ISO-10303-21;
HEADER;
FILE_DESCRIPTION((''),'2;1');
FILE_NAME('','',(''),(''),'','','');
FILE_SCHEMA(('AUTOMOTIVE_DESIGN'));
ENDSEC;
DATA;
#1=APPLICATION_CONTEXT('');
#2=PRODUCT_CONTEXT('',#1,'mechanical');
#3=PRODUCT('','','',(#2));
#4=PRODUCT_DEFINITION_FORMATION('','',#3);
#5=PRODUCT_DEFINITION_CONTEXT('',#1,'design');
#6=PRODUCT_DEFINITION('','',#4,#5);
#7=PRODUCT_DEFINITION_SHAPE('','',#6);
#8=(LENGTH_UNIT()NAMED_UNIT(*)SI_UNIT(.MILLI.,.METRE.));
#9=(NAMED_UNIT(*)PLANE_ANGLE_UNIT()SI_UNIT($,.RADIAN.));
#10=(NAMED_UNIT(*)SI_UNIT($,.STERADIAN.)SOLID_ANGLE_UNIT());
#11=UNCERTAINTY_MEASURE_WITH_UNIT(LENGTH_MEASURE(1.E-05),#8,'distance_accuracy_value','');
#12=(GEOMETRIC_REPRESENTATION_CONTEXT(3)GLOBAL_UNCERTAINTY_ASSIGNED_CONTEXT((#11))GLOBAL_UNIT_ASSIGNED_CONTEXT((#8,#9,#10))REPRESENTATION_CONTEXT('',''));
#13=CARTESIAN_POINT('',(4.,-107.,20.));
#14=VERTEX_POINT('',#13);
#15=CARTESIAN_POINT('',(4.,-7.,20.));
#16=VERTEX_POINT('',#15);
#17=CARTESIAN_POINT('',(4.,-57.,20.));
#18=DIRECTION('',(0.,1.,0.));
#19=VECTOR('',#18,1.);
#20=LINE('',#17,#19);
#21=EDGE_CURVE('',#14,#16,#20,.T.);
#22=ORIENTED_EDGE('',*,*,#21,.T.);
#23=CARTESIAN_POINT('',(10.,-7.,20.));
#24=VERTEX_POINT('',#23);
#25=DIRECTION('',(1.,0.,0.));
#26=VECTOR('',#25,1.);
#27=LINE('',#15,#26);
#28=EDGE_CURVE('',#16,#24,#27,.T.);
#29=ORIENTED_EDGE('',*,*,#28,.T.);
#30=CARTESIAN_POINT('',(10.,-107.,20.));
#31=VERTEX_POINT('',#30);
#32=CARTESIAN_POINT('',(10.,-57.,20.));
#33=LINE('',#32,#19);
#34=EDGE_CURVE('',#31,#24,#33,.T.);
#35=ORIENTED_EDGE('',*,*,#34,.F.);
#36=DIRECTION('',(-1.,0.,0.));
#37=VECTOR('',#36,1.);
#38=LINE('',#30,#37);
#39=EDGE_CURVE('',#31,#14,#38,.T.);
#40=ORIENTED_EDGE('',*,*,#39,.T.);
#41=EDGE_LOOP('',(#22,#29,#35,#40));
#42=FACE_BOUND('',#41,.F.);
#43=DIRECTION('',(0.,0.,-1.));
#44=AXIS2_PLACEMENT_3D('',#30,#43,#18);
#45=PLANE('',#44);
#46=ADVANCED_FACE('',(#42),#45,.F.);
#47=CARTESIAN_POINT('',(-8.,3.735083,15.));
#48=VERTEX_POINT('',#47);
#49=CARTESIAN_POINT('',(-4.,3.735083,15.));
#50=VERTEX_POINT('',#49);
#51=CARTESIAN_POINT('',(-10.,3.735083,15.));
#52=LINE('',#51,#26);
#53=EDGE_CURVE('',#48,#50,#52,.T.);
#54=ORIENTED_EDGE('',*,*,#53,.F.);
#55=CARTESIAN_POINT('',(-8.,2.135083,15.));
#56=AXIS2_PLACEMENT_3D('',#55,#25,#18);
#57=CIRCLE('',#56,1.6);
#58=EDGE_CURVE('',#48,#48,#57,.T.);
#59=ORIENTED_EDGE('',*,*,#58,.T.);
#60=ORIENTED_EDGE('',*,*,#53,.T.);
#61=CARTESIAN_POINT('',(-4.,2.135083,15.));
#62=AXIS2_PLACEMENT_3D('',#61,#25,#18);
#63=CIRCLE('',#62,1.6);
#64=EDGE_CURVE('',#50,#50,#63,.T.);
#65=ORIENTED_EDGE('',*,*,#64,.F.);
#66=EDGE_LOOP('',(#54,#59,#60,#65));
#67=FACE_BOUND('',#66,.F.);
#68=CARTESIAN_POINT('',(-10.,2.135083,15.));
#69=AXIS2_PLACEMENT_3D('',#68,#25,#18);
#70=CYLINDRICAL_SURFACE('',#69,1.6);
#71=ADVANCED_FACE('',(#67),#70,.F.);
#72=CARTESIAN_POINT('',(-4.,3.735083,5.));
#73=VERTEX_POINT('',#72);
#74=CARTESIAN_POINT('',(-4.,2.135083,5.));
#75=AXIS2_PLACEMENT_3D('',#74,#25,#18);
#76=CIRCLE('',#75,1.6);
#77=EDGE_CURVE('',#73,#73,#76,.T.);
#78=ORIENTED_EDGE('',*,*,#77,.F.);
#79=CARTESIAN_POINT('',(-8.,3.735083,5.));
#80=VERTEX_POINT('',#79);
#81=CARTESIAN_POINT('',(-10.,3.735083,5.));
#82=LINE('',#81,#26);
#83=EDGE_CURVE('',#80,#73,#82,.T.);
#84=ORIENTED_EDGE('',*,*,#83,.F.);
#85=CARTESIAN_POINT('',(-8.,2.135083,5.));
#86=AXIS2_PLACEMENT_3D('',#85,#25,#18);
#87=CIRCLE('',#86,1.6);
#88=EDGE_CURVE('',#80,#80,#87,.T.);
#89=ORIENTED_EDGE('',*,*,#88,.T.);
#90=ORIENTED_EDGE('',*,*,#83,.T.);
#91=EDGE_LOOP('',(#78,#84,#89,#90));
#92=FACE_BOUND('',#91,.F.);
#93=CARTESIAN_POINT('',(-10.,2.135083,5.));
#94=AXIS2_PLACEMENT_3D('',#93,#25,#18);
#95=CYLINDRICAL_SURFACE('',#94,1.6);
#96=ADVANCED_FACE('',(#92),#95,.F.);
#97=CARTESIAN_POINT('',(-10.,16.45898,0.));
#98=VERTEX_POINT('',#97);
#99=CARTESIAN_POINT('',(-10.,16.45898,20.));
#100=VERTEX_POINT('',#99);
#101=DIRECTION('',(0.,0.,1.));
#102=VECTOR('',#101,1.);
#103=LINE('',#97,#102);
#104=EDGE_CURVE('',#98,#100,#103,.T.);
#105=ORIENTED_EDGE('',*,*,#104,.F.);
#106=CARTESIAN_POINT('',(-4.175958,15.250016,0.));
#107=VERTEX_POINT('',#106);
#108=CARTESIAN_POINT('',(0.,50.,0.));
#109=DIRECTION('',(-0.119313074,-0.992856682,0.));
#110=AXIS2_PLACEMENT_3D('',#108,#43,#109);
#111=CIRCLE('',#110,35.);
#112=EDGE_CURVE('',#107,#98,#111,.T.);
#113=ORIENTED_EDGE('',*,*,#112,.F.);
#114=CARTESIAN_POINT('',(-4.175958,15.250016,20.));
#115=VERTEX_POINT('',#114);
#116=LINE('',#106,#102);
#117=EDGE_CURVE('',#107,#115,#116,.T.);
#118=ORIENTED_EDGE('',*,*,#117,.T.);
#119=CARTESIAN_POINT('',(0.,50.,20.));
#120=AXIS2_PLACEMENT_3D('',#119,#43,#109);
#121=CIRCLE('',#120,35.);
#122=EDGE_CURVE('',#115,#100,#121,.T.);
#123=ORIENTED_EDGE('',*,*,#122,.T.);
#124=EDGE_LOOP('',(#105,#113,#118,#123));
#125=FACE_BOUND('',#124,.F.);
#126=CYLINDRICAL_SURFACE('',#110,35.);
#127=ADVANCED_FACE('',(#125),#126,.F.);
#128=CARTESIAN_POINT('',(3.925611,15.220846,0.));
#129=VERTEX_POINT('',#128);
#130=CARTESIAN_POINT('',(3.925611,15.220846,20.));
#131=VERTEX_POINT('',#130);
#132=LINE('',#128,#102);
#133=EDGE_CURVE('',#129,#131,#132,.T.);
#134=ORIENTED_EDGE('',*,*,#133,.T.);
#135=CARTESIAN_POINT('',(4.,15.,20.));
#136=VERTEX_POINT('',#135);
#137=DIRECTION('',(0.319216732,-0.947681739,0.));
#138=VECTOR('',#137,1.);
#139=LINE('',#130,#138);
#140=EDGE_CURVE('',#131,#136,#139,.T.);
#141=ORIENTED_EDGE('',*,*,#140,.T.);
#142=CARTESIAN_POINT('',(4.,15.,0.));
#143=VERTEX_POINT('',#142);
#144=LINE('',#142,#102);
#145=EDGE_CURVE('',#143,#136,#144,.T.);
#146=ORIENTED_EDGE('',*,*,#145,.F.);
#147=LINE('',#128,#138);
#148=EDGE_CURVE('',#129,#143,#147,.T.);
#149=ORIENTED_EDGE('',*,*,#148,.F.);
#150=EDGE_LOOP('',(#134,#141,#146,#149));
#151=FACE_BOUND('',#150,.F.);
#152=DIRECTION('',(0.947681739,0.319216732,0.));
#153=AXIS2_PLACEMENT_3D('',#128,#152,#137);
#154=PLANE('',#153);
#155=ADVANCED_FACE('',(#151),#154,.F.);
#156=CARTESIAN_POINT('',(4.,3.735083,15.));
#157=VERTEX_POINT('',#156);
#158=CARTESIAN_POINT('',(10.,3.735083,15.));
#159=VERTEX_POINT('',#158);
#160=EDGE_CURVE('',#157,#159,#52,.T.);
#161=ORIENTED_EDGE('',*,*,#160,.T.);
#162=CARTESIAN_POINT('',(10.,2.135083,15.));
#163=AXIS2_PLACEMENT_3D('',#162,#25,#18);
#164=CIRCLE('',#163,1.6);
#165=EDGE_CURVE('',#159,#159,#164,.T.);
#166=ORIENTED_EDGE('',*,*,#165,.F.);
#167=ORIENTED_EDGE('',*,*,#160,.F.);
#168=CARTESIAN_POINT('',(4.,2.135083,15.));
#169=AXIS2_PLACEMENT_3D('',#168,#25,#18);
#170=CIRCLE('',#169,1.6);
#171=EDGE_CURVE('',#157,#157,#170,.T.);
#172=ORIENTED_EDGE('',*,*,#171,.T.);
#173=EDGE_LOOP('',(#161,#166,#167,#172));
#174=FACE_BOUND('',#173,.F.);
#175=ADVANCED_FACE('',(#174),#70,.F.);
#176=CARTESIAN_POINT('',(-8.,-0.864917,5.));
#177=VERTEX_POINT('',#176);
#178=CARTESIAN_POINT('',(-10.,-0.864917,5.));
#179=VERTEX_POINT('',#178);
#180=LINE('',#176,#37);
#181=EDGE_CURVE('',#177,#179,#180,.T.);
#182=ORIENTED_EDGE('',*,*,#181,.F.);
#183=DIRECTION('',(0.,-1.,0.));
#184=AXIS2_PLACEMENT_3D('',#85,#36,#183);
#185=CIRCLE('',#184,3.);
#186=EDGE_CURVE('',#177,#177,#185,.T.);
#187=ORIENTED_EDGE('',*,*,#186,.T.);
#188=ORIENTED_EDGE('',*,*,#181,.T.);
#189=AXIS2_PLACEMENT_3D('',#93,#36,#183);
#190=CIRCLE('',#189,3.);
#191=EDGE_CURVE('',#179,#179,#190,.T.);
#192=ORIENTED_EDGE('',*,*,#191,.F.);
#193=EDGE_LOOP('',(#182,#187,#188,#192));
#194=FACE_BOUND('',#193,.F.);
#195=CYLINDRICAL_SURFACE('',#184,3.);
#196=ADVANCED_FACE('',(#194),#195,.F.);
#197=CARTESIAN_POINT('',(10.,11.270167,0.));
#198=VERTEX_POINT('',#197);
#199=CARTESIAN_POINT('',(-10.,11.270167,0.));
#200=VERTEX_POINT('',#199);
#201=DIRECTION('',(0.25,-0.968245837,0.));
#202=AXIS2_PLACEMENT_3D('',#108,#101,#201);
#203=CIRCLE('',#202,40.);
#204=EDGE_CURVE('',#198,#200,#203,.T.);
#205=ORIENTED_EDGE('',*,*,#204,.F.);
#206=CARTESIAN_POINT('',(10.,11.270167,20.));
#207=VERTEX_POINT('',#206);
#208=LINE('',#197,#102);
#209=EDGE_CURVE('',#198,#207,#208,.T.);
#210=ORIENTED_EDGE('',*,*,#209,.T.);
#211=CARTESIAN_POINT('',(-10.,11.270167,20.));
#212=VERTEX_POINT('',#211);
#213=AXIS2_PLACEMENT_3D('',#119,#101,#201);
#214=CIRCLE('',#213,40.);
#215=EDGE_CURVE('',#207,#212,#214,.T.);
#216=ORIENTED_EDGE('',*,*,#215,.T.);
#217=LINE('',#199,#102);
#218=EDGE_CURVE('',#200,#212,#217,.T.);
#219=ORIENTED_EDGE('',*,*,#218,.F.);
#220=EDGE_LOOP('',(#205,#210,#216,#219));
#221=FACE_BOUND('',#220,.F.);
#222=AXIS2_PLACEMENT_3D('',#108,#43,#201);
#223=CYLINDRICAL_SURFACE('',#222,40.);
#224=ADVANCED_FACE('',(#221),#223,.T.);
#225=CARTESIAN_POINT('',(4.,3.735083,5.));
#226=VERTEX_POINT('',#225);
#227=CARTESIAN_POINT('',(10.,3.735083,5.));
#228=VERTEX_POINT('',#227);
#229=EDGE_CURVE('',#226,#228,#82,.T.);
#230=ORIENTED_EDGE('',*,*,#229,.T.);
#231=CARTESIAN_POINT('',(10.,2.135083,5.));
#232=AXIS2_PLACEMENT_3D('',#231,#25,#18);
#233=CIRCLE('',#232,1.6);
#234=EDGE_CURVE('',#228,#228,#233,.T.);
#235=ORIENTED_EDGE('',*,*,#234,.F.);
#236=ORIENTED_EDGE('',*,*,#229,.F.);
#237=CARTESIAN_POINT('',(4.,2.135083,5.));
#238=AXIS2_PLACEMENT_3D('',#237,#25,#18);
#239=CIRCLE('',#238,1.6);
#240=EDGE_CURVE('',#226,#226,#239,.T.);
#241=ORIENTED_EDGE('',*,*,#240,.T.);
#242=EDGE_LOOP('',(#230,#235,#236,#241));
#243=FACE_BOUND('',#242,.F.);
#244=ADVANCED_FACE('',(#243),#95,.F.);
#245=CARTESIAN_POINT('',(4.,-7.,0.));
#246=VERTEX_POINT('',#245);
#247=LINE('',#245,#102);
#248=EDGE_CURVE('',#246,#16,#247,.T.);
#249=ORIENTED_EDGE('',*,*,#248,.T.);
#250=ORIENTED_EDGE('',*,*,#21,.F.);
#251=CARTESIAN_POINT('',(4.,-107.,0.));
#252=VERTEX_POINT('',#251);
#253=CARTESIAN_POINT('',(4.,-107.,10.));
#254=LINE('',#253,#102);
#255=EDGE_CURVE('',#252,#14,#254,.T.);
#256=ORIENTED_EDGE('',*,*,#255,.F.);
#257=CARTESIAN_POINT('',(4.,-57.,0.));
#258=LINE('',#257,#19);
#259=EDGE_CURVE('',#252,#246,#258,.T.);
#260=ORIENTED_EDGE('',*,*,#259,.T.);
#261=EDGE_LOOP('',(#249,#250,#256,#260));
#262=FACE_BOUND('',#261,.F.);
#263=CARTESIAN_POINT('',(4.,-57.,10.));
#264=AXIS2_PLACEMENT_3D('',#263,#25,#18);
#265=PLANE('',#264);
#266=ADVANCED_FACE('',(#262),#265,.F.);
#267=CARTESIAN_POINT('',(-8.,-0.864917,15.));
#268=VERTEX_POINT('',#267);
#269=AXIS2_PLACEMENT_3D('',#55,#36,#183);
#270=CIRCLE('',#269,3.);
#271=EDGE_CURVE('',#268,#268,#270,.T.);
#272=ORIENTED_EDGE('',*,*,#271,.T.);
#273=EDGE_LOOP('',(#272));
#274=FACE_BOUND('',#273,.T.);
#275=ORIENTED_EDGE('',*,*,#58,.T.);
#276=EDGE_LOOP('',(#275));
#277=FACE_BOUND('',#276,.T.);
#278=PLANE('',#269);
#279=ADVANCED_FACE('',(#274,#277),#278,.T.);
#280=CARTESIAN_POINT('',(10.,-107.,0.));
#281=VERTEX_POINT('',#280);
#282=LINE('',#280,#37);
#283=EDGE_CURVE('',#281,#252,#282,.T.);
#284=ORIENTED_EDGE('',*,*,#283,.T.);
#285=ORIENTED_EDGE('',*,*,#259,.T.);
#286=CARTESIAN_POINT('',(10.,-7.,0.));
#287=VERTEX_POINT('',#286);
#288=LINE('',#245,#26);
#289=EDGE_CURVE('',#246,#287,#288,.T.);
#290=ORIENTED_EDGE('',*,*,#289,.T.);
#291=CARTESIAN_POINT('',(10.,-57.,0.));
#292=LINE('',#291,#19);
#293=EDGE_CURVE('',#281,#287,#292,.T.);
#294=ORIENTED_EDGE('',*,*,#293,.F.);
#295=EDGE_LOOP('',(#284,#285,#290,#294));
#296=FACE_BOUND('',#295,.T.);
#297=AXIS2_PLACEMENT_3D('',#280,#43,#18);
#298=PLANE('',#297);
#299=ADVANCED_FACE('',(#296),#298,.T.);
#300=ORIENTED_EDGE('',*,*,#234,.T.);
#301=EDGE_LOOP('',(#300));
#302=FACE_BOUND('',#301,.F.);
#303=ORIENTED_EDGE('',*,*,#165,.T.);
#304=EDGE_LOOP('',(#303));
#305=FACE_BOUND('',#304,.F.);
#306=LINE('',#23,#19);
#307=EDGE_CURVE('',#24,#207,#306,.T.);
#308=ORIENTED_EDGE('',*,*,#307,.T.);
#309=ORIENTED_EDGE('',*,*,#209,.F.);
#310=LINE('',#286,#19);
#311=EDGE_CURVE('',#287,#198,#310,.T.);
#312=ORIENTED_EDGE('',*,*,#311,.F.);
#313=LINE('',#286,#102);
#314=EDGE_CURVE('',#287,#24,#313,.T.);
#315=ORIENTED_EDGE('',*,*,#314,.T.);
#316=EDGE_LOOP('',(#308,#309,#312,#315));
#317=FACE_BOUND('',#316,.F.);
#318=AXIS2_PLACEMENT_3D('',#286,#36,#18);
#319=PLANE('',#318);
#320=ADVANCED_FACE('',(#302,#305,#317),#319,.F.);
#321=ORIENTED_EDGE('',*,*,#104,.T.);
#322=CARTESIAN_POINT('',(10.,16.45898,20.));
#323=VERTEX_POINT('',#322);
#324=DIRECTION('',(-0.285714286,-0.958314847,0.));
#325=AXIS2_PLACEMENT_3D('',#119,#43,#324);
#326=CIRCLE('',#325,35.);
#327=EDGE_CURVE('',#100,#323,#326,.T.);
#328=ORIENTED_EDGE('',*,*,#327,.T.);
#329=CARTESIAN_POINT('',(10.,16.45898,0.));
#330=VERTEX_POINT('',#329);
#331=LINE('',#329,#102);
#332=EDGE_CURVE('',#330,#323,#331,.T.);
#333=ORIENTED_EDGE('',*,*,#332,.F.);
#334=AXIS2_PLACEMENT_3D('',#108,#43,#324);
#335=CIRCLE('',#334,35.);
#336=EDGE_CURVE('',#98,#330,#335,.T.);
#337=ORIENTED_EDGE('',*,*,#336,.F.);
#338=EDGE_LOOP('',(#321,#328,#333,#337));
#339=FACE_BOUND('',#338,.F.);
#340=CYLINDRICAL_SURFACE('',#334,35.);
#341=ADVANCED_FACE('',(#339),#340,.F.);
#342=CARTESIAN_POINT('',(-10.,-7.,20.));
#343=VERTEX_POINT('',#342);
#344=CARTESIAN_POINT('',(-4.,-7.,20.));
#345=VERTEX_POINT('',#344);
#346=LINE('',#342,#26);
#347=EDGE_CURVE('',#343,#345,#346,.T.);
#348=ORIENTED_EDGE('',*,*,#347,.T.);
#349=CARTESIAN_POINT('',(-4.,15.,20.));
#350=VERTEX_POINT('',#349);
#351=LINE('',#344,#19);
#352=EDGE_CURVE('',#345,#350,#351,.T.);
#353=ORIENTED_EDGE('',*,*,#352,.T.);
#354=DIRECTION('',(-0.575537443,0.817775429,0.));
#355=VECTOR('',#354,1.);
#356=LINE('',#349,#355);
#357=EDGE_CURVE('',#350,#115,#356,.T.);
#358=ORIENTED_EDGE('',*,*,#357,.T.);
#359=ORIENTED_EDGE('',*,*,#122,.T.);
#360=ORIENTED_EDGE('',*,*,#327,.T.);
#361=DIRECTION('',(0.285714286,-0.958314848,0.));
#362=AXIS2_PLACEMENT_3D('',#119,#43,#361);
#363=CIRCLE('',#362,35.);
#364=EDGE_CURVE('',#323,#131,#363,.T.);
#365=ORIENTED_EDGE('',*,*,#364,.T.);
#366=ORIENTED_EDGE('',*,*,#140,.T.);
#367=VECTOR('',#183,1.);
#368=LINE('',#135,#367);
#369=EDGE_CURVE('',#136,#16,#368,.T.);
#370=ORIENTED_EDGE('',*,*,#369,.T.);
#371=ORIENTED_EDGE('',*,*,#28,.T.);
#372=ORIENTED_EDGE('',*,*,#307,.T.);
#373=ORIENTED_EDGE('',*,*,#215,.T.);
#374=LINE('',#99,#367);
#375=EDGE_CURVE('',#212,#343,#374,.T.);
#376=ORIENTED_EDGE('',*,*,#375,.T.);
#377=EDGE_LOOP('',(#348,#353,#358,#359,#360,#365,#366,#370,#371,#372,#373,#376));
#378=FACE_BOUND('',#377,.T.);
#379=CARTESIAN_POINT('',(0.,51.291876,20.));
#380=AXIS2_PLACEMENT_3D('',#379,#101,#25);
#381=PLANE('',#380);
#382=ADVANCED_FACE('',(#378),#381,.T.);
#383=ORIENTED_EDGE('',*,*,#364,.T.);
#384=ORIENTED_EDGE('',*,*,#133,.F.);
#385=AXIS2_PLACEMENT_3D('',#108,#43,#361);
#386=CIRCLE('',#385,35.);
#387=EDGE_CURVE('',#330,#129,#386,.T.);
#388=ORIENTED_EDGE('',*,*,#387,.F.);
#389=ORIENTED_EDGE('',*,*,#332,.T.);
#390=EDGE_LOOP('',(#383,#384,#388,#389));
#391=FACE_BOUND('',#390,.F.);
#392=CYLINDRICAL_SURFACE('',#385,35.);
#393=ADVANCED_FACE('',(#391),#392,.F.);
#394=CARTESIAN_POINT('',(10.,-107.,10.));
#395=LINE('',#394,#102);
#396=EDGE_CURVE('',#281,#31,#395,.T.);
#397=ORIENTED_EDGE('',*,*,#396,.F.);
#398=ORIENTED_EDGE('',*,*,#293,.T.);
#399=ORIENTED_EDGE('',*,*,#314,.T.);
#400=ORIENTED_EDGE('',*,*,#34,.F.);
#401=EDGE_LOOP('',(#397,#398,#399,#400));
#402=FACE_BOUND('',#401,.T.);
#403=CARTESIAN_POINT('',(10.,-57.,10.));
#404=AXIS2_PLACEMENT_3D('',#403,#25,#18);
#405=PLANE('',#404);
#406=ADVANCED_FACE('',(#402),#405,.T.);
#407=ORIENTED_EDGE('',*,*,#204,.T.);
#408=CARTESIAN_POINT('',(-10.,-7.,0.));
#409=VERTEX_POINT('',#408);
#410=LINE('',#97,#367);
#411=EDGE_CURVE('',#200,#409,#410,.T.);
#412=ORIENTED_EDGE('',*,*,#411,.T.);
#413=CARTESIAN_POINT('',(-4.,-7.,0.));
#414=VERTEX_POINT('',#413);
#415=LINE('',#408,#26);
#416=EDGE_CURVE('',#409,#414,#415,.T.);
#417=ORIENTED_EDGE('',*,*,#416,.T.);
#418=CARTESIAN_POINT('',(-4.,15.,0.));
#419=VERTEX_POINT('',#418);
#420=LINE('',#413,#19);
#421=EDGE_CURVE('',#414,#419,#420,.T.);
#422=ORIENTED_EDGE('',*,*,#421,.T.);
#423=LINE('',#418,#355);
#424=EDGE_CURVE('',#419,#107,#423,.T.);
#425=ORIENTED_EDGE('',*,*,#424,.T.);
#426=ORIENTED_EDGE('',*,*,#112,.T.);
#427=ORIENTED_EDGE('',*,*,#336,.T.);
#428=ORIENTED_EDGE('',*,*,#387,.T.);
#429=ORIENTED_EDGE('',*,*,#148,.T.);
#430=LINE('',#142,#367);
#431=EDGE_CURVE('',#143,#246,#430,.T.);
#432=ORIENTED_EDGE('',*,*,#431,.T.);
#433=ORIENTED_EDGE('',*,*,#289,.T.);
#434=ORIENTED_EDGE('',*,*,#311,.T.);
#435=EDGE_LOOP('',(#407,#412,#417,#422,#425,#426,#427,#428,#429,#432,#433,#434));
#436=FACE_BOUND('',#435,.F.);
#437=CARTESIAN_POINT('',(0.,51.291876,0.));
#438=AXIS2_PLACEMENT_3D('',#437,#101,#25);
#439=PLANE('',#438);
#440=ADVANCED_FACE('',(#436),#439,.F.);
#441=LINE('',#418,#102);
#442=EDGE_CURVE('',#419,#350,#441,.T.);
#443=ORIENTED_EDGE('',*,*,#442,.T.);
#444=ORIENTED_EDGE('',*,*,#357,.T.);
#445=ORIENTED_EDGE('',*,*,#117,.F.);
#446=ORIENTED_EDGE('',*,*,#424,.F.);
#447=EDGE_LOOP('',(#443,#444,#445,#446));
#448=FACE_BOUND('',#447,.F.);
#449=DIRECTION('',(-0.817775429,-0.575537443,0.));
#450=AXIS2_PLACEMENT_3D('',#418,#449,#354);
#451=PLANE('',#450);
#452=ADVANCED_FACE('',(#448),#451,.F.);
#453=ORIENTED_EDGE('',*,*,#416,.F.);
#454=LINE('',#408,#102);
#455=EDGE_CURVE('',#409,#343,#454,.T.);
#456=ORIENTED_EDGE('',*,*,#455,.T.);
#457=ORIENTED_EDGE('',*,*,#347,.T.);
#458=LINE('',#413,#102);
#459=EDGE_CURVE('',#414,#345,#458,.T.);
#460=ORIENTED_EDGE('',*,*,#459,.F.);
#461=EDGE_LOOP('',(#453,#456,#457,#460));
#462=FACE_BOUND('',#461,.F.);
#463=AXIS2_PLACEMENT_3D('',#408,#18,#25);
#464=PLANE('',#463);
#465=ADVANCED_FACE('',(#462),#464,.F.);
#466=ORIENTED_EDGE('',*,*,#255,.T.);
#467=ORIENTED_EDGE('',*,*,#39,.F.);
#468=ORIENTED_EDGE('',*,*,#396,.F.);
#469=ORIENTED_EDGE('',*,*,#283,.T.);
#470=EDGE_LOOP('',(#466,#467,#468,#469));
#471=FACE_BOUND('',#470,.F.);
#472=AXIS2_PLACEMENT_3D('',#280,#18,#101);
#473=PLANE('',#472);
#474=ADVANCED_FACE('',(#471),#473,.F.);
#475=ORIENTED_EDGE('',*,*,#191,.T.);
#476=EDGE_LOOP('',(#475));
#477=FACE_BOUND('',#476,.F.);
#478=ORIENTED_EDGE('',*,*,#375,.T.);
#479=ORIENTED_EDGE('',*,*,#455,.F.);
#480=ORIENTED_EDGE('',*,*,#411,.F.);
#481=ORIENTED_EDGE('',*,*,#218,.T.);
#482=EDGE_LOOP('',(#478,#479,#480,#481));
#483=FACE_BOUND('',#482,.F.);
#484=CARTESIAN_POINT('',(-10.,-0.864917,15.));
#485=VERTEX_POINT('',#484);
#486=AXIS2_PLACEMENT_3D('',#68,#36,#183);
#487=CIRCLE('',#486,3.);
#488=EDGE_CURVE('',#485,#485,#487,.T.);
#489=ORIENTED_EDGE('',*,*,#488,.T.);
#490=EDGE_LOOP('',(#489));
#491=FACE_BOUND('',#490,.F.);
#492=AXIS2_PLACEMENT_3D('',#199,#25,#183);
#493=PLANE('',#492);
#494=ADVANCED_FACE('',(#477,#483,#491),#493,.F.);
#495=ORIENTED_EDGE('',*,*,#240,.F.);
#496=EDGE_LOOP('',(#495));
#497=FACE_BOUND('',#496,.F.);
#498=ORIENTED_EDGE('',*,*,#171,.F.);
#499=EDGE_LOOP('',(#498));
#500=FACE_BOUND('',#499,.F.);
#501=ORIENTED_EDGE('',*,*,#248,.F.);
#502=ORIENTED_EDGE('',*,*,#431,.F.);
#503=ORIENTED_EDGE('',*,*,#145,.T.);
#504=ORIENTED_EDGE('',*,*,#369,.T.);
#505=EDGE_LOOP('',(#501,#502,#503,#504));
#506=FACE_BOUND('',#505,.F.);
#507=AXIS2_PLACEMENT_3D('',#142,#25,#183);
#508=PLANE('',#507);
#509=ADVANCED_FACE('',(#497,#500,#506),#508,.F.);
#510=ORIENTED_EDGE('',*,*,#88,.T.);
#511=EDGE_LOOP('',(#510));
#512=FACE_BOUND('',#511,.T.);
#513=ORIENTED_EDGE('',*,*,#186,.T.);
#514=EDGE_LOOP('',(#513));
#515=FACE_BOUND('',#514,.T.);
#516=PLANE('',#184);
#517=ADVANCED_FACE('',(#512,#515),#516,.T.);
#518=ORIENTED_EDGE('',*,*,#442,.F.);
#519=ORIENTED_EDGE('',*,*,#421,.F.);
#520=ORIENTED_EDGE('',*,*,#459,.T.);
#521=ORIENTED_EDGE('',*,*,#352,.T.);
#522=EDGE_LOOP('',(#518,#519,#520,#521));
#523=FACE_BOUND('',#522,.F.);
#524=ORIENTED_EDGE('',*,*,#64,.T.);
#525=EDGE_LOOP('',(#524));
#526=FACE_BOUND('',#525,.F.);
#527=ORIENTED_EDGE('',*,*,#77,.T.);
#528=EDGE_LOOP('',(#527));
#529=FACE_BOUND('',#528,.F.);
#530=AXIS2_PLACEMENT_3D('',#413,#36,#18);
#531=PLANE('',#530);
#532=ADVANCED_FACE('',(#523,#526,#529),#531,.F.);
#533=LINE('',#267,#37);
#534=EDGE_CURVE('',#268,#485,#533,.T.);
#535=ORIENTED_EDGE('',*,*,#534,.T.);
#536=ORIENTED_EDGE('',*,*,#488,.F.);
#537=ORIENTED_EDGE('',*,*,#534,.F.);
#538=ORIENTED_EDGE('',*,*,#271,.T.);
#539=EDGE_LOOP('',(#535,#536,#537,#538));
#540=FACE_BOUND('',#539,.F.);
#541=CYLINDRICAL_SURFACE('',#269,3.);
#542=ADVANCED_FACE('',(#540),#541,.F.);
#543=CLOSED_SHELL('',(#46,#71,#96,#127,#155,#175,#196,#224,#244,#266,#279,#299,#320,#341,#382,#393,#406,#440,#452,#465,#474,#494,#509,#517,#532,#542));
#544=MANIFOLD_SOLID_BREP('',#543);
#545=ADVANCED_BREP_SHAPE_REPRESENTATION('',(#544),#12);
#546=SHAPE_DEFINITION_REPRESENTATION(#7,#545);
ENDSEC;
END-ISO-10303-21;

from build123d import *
from build123d import SkipClean  # not in build123d's __all__

# Parameters (mm, degrees)
F1_DEPTH       = 20
F3_D           = 3.2
F3_CBORE_D     = 6
F3_CBORE_DEPTH = 2
F4_W           = 100
F4_H           = 20
F5_DEPTH       = 6


with BuildPart() as f1:
    # F0 (on Top) → F1 (new body)
    with BuildSketch(Plane.XY):
        with BuildLine():
            ThreePointArc((-10, 16.4589803375), (0, 85), (10, 16.4589803375))
            Line((10, 16.4589803375), (10, 11.2701665379))
            ThreePointArc((10, 11.2701665379), (0, 90), (-10, 11.2701665379))
            Line((-10, 11.2701665379), (-10, 16.4589803375))
        make_face()
        with BuildLine():
            ThreePointArc((-4.1759576062, 15.2500161429), (-7.1137080428, 15.7305506627), (-10, 16.4589803375))
            Line((-10, 16.4589803375), (-10, 11.2701665379))
            Line((-10, 11.2701665379), (-10, -7.0000002161))
            Line((-10, -7.0000002161), (-4.00000019, -7.0000002161))
            Line((-4.00000019, -7.0000002161), (-4.00000019, 15))
            Line((-4.00000019, 15), (-4.1759576062, 15.2500161429))
        make_face()
        with BuildLine():
            Line((10, 11.2701665379), (10, 16.4589803375))
            ThreePointArc((10, 16.4589803375), (6.990271983, 15.7051593151), (3.925610649, 15.2208455964))
            Line((3.925610649, 15.2208455964), (4.00000019, 15))
            Line((4.00000019, 15), (4.00000019, -7.0000002161))
            Line((4.00000019, -7.0000002161), (10, -7.0000002161))
            Line((10, -7.0000002161), (10, 11.2701665379))
        make_face()
    extrude(amount=F1_DEPTH)

    # F3 (through all)
    with Locations(Plane(origin=(-10, 0, 0), x_dir=(0, -1, 0), z_dir=(-1, 0, 0))):
        with Locations((-2.1350831609, 5), (-2.1350831609, 15)):
            CounterBoreHole(F3_D / 2, F3_CBORE_D / 2, F3_CBORE_DEPTH)

    # F4 (on face) → F5 (join)
    with BuildSketch(Plane.YZ.offset(10)):
        with Locations((-57.0000002161, 10)):
            Rectangle(F4_W, F4_H)
    with SkipClean():  # cleaning this boolean's faces spoils the solid; the shape is the same uncleaned
        extrude(amount=-F5_DEPTH)


solid = f1.part
